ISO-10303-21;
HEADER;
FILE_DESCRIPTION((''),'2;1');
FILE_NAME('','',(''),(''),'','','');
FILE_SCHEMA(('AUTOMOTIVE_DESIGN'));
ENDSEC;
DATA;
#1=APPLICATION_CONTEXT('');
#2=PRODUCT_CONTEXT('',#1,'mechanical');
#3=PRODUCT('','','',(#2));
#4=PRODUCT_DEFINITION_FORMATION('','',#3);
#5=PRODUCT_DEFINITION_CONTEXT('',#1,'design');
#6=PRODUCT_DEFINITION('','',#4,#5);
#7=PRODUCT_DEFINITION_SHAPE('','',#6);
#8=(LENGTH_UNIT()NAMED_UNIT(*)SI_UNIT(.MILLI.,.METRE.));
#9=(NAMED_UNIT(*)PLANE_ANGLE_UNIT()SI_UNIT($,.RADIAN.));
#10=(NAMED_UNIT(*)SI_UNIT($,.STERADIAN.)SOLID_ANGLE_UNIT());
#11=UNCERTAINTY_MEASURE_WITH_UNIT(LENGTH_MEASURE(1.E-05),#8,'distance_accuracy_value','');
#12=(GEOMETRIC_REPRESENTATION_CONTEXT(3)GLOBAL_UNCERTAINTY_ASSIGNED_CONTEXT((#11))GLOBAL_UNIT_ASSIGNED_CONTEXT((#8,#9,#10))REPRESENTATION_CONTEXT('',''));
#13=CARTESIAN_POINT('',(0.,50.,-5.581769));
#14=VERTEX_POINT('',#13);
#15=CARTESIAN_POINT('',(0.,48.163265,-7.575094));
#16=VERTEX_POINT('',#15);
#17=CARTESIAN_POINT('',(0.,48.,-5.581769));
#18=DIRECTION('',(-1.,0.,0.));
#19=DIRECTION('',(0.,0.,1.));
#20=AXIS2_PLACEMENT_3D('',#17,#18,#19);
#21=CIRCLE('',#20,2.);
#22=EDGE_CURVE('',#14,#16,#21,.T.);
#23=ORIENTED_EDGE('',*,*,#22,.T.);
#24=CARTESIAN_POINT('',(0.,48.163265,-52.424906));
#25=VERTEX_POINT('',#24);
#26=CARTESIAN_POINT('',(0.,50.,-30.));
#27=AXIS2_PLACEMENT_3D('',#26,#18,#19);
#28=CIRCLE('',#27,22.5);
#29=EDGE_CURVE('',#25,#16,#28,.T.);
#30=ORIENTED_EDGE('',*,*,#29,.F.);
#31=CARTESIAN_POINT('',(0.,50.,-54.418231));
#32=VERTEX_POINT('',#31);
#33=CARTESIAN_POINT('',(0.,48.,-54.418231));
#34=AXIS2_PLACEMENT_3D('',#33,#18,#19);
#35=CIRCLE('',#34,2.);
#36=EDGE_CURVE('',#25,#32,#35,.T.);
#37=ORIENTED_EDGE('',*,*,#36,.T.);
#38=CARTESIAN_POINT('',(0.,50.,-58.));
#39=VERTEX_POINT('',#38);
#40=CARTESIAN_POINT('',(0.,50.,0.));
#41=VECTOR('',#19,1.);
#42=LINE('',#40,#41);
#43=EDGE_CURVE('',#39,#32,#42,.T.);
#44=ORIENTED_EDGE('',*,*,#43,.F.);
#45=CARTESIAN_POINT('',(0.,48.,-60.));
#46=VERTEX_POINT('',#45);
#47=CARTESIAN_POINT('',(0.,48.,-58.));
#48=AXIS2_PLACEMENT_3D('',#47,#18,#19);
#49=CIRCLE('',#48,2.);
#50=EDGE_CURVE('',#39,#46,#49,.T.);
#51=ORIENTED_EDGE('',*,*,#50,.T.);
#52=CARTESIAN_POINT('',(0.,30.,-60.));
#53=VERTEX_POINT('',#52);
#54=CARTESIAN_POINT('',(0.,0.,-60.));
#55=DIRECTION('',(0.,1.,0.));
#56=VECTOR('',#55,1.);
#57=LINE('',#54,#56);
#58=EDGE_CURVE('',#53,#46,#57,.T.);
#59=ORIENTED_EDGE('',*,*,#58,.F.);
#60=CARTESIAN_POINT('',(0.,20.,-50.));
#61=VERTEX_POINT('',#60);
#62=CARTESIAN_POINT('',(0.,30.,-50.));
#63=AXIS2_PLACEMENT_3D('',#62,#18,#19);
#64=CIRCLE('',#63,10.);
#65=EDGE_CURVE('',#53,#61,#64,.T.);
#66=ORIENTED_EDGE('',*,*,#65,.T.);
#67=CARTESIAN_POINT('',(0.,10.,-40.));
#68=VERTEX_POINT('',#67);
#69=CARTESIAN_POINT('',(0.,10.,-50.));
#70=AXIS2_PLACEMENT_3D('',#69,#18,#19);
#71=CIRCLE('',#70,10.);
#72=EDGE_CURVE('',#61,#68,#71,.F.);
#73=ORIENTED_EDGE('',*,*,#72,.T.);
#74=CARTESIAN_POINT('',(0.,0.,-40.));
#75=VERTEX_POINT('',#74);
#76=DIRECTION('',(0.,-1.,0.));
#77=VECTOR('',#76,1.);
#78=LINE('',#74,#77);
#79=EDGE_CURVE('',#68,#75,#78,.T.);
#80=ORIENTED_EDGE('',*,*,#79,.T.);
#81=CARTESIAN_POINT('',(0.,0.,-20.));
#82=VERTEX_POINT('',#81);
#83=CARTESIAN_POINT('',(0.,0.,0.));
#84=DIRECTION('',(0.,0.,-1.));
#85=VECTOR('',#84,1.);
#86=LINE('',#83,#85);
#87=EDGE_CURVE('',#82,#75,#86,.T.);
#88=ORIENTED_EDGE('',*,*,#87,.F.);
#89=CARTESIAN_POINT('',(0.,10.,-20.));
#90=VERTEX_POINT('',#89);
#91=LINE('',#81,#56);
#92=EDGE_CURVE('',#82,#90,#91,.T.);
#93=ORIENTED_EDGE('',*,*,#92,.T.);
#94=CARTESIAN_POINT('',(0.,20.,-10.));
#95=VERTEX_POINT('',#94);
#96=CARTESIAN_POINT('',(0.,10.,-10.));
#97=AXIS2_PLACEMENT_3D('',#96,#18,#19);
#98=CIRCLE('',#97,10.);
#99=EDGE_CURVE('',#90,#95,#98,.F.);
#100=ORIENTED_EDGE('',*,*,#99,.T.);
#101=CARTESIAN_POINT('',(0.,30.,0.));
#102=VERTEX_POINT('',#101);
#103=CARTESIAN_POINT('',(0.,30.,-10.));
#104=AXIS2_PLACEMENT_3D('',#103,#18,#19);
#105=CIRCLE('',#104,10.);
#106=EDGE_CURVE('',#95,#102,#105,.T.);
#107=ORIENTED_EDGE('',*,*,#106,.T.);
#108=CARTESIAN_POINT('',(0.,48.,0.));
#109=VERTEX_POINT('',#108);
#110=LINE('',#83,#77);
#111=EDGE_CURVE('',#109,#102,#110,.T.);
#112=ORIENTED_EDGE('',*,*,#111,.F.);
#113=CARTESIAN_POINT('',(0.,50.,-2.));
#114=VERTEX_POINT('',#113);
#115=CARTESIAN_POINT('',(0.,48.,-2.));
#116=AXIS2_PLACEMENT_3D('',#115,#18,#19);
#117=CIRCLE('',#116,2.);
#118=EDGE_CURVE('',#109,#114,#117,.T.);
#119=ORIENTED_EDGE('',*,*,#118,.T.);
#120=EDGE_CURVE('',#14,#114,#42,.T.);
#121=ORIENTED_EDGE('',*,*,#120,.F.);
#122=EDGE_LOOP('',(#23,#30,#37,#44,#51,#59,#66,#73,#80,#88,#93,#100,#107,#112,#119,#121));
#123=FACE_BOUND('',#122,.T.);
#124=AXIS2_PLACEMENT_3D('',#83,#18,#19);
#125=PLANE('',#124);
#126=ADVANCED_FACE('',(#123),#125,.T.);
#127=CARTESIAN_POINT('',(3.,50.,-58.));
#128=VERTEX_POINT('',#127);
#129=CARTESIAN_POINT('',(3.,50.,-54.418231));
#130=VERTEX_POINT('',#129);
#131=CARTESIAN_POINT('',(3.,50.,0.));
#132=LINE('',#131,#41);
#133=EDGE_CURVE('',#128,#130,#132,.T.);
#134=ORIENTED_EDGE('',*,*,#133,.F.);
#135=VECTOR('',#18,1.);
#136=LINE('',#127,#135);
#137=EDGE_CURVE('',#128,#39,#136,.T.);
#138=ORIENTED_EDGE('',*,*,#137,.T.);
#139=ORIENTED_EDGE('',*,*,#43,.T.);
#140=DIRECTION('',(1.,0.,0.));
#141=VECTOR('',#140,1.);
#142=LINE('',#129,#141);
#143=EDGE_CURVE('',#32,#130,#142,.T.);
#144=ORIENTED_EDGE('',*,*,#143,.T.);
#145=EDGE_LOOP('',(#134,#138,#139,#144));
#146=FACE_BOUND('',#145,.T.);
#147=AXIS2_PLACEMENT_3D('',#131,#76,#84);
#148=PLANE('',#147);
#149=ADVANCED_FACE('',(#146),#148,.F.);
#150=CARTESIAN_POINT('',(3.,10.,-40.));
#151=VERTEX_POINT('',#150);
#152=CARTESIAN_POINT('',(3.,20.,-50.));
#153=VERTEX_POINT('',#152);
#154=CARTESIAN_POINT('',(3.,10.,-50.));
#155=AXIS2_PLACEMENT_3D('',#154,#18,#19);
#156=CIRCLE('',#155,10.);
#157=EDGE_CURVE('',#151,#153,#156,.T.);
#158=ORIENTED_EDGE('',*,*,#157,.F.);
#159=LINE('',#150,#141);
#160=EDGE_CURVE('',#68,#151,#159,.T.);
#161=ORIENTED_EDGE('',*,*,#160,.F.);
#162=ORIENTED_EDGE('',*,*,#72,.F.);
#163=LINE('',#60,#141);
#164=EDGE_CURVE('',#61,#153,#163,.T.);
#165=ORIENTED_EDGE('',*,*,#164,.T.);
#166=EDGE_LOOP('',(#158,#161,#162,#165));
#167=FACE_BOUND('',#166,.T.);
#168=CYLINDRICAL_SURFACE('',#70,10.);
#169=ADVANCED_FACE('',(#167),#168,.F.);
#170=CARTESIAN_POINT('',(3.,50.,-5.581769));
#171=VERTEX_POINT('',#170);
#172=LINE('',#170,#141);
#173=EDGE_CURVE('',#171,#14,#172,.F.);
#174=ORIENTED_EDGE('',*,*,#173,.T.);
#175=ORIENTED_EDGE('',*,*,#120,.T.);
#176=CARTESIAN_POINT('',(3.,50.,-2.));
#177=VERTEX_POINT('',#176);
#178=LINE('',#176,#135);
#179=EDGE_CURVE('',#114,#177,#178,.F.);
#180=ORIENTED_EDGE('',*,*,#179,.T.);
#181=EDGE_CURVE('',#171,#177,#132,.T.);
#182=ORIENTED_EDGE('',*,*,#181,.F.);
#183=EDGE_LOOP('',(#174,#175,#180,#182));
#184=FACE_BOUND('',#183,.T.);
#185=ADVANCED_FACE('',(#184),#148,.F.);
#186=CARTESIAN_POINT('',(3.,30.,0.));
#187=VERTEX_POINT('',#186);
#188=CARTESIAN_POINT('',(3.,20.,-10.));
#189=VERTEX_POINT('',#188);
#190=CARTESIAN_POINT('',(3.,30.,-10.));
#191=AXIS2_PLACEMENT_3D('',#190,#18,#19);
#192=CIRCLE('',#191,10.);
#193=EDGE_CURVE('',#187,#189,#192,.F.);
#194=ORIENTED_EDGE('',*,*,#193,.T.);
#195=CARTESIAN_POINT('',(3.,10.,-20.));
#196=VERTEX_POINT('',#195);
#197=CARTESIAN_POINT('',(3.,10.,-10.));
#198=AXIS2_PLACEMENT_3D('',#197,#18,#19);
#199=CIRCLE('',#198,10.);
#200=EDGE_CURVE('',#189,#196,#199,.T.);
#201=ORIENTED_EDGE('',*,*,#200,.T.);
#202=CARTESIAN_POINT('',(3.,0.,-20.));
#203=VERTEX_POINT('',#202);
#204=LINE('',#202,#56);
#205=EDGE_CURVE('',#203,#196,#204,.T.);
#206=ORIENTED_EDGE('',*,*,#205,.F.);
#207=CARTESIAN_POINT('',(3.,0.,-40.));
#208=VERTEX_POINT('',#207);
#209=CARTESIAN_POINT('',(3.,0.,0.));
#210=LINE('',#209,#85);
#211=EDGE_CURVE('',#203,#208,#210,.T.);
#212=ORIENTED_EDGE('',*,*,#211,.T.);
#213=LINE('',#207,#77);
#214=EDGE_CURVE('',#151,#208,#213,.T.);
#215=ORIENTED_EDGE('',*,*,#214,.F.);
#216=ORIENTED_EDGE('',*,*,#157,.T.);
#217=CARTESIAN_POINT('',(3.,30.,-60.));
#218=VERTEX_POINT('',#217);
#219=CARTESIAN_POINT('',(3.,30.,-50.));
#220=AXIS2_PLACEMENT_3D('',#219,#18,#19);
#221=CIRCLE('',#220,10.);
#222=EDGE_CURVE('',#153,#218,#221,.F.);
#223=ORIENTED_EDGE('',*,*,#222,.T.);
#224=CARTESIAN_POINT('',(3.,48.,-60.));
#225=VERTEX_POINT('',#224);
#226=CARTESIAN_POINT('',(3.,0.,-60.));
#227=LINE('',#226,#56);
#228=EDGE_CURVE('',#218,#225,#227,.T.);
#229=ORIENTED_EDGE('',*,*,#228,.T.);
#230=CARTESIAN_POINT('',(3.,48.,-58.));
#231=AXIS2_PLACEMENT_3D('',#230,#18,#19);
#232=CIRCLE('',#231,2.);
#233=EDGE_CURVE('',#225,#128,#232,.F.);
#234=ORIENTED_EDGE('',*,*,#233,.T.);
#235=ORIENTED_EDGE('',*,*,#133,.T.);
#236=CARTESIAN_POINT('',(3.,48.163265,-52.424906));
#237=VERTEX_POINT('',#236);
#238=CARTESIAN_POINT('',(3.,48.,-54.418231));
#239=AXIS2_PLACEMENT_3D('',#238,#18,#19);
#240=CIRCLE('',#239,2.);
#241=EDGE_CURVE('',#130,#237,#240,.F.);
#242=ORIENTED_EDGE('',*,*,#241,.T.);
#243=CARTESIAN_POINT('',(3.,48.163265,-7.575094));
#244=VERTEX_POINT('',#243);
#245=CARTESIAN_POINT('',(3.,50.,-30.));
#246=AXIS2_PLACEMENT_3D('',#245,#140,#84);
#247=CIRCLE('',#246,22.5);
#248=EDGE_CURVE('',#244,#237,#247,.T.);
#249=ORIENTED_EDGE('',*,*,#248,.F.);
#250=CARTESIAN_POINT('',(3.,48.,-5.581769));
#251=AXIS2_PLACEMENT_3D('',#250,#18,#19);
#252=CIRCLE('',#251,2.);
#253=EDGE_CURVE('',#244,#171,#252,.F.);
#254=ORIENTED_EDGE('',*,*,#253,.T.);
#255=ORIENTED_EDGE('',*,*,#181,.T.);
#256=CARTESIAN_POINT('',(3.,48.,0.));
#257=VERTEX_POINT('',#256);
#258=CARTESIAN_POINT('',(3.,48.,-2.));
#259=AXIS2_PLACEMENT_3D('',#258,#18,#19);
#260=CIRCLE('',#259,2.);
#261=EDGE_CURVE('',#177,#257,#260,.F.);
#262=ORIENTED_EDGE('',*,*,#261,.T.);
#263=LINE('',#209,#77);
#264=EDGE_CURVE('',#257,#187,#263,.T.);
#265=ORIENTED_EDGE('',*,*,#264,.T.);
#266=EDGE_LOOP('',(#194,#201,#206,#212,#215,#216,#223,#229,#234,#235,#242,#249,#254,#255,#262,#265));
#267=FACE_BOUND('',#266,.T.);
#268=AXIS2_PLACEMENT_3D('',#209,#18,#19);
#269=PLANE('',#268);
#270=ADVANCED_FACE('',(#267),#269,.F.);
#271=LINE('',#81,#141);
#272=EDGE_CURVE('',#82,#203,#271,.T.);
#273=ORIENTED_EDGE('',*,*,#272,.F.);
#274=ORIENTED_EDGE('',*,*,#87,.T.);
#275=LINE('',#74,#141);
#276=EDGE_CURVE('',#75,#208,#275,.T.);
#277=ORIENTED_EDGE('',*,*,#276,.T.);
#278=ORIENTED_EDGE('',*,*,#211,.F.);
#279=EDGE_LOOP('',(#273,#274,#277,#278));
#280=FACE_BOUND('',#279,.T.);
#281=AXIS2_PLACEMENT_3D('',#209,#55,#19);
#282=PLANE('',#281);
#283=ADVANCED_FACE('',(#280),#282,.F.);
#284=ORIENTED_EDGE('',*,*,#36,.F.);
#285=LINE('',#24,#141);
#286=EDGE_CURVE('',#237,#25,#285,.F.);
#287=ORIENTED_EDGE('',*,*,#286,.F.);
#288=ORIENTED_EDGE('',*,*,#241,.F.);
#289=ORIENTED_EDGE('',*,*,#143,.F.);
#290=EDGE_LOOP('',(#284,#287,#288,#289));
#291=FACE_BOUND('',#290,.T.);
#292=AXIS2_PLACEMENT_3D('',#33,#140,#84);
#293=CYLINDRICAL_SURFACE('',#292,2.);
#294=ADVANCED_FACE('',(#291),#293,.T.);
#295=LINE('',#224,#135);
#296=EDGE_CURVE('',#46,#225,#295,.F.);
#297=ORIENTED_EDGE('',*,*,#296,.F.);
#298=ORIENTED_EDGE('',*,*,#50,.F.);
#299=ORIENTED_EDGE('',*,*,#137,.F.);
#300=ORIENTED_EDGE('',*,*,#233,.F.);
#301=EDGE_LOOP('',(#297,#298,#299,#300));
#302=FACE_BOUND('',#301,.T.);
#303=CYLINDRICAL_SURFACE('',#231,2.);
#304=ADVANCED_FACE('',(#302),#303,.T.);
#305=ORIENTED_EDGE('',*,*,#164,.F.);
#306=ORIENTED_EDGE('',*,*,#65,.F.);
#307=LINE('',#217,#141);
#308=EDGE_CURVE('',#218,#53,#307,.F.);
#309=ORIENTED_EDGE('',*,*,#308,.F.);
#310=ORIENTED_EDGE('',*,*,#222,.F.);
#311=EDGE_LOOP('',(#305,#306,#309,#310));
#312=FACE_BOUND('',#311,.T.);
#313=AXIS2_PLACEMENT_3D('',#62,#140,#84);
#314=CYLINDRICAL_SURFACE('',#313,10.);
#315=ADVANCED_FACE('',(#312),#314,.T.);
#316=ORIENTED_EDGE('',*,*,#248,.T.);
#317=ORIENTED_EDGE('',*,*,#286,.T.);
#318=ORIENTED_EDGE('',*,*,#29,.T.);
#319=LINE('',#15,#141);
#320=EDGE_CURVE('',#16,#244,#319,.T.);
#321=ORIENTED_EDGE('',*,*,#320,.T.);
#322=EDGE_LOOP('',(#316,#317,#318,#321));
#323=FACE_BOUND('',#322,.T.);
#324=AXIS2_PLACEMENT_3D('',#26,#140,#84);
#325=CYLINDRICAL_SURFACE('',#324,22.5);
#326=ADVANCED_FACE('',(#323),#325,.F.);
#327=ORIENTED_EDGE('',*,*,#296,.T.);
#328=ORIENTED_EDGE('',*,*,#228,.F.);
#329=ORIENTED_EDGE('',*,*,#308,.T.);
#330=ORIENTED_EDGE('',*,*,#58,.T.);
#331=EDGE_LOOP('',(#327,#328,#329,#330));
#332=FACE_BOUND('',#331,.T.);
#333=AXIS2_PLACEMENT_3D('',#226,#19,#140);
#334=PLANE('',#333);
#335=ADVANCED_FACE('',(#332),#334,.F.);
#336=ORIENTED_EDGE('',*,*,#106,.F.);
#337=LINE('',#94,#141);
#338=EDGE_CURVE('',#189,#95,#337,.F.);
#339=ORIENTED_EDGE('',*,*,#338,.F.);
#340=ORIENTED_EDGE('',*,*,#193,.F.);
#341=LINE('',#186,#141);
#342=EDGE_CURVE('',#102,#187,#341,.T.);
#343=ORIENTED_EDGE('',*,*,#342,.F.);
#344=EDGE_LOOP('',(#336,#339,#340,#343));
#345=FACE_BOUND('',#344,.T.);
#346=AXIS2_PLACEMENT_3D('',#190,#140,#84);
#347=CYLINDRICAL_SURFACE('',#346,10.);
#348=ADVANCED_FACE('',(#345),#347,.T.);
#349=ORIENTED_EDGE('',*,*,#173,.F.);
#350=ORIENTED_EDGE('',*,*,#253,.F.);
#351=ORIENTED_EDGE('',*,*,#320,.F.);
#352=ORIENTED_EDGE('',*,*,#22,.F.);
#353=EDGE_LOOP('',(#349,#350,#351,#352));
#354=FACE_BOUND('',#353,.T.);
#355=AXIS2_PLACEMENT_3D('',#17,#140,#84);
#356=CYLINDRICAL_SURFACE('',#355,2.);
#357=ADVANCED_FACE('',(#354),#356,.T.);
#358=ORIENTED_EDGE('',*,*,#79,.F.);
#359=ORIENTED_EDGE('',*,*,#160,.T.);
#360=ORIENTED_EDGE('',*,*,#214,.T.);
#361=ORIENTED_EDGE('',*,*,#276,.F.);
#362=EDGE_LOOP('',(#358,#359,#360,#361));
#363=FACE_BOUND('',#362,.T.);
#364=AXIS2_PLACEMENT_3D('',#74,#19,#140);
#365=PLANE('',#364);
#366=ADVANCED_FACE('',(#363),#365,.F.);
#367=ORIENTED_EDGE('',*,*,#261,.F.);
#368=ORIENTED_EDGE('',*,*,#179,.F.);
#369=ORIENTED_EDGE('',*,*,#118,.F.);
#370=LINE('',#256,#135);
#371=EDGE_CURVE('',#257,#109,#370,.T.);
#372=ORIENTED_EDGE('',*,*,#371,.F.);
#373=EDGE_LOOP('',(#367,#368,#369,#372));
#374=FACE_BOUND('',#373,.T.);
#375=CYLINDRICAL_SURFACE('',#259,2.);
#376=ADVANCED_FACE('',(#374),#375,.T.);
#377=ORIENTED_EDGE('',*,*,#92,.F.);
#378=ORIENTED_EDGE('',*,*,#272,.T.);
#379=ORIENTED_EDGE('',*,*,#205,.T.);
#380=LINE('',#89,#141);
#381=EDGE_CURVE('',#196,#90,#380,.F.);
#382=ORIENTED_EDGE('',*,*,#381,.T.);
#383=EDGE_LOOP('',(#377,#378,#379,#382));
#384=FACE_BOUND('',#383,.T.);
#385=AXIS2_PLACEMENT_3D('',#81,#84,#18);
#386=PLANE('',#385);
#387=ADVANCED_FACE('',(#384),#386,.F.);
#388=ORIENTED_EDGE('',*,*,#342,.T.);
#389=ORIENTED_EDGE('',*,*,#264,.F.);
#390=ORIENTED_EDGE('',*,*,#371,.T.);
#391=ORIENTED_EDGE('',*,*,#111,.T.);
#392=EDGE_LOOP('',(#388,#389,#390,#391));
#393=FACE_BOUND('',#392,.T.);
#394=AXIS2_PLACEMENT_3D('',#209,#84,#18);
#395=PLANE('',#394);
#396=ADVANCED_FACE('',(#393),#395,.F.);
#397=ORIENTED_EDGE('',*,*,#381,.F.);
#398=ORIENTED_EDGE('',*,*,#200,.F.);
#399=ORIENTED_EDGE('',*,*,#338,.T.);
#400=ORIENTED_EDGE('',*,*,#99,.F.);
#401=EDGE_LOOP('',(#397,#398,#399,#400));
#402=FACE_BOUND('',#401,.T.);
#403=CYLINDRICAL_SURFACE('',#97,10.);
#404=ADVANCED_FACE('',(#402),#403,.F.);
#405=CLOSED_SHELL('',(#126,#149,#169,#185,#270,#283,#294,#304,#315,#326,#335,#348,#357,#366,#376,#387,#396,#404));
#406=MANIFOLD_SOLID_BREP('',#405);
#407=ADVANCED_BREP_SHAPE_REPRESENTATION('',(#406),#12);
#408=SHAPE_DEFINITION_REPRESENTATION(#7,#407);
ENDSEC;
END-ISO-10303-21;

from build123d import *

# Parameters (mm, degrees)
SKETCH1_W           = 60
SKETCH1_H           = 50
BOSS_EXTRUDE1_DEPTH = 3
SKETCH2_W           = 20
SKETCH2_H           = 20
CUT_EXTRUDE1_DEPTH  = 3
SKETCH5_R           = 22.5
CUT_EXTRUDE2_DEPTH  = 3
FILLET1_DEPTH       = 3
FILLET1_2_DEPTH     = 3
FILLET2_R           = 2


with BuildPart() as part:
    # Sketch1 → Boss-Extrude1 (new body)
    with BuildSketch(Plane(origin=(0, 0, 0), x_dir=(0, 0, -1), z_dir=(1, 0, 0))):
        with Locations((30, 25)):
            Rectangle(SKETCH1_W, SKETCH1_H)
    extrude(amount=BOSS_EXTRUDE1_DEPTH)

    # Sketch2 → Cut-Extrude1 (cut)
    with BuildSketch(Plane(origin=(3, 0, 0), x_dir=(0, 0, -1), z_dir=(1, 0, 0))):
        with Locations((10, 10)):
            Rectangle(SKETCH2_W, SKETCH2_H)
        with Locations((50, 10)):
            Rectangle(SKETCH2_W, SKETCH2_H)
    extrude(amount=-CUT_EXTRUDE1_DEPTH, mode=Mode.SUBTRACT)

    # Sketch5 → Cut-Extrude2 (cut)
    with BuildSketch(Plane(origin=(3, 0, 0), x_dir=(0, 0, -1), z_dir=(1, 0, 0))):
        with Locations((30, 50)):
            Circle(SKETCH5_R)
    extrude(amount=-CUT_EXTRUDE2_DEPTH, mode=Mode.SUBTRACT)

    # Fillet1: read off the stored shape, not the designer's step
    # Fillet1 outline → Fillet1 (cut)
    with BuildSketch(Plane.YZ):
        with BuildLine():
            ThreePointArc((30, -60), (22.928932188, -57.071067812), (20, -50))
            Line((20, -50), (20, -60))
            Line((20, -60), (30, -60))
        make_face()
        with BuildLine():
            ThreePointArc((20, -10), (22.928932188, -2.928932188), (30, 0))
            Line((30, 0), (20, 0))
            Line((20, 0), (20, -10))
        make_face()
    extrude(amount=FILLET1_DEPTH, mode=Mode.SUBTRACT)

    # Fillet1 2 outline → Fillet1 2 (add)
    with BuildSketch(Plane.YZ):
        with BuildLine():
            ThreePointArc((10, -40), (17.071067812, -42.928932188), (20, -50))
            Line((20, -50), (20, -40))
            Line((20, -40), (10, -40))
        make_face()
        with BuildLine():
            Line((20, -20), (20, -10))
            ThreePointArc((20, -10), (17.071067812, -17.071067812), (10, -20))
            Line((10, -20), (20, -20))
        make_face()
    extrude(amount=FILLET1_2_DEPTH)

    # Fillet2
    fillet2_edges = [part.edges().sort_by_distance(p)[0] for p in [
        (1.5, 50, -52.5),
        (1.5, 50, -7.5),
        (1.5, 50, 0),
        (1.5, 50, -60),
    ]]
    fillet(fillet2_edges, radius=FILLET2_R)


solid = part.part
